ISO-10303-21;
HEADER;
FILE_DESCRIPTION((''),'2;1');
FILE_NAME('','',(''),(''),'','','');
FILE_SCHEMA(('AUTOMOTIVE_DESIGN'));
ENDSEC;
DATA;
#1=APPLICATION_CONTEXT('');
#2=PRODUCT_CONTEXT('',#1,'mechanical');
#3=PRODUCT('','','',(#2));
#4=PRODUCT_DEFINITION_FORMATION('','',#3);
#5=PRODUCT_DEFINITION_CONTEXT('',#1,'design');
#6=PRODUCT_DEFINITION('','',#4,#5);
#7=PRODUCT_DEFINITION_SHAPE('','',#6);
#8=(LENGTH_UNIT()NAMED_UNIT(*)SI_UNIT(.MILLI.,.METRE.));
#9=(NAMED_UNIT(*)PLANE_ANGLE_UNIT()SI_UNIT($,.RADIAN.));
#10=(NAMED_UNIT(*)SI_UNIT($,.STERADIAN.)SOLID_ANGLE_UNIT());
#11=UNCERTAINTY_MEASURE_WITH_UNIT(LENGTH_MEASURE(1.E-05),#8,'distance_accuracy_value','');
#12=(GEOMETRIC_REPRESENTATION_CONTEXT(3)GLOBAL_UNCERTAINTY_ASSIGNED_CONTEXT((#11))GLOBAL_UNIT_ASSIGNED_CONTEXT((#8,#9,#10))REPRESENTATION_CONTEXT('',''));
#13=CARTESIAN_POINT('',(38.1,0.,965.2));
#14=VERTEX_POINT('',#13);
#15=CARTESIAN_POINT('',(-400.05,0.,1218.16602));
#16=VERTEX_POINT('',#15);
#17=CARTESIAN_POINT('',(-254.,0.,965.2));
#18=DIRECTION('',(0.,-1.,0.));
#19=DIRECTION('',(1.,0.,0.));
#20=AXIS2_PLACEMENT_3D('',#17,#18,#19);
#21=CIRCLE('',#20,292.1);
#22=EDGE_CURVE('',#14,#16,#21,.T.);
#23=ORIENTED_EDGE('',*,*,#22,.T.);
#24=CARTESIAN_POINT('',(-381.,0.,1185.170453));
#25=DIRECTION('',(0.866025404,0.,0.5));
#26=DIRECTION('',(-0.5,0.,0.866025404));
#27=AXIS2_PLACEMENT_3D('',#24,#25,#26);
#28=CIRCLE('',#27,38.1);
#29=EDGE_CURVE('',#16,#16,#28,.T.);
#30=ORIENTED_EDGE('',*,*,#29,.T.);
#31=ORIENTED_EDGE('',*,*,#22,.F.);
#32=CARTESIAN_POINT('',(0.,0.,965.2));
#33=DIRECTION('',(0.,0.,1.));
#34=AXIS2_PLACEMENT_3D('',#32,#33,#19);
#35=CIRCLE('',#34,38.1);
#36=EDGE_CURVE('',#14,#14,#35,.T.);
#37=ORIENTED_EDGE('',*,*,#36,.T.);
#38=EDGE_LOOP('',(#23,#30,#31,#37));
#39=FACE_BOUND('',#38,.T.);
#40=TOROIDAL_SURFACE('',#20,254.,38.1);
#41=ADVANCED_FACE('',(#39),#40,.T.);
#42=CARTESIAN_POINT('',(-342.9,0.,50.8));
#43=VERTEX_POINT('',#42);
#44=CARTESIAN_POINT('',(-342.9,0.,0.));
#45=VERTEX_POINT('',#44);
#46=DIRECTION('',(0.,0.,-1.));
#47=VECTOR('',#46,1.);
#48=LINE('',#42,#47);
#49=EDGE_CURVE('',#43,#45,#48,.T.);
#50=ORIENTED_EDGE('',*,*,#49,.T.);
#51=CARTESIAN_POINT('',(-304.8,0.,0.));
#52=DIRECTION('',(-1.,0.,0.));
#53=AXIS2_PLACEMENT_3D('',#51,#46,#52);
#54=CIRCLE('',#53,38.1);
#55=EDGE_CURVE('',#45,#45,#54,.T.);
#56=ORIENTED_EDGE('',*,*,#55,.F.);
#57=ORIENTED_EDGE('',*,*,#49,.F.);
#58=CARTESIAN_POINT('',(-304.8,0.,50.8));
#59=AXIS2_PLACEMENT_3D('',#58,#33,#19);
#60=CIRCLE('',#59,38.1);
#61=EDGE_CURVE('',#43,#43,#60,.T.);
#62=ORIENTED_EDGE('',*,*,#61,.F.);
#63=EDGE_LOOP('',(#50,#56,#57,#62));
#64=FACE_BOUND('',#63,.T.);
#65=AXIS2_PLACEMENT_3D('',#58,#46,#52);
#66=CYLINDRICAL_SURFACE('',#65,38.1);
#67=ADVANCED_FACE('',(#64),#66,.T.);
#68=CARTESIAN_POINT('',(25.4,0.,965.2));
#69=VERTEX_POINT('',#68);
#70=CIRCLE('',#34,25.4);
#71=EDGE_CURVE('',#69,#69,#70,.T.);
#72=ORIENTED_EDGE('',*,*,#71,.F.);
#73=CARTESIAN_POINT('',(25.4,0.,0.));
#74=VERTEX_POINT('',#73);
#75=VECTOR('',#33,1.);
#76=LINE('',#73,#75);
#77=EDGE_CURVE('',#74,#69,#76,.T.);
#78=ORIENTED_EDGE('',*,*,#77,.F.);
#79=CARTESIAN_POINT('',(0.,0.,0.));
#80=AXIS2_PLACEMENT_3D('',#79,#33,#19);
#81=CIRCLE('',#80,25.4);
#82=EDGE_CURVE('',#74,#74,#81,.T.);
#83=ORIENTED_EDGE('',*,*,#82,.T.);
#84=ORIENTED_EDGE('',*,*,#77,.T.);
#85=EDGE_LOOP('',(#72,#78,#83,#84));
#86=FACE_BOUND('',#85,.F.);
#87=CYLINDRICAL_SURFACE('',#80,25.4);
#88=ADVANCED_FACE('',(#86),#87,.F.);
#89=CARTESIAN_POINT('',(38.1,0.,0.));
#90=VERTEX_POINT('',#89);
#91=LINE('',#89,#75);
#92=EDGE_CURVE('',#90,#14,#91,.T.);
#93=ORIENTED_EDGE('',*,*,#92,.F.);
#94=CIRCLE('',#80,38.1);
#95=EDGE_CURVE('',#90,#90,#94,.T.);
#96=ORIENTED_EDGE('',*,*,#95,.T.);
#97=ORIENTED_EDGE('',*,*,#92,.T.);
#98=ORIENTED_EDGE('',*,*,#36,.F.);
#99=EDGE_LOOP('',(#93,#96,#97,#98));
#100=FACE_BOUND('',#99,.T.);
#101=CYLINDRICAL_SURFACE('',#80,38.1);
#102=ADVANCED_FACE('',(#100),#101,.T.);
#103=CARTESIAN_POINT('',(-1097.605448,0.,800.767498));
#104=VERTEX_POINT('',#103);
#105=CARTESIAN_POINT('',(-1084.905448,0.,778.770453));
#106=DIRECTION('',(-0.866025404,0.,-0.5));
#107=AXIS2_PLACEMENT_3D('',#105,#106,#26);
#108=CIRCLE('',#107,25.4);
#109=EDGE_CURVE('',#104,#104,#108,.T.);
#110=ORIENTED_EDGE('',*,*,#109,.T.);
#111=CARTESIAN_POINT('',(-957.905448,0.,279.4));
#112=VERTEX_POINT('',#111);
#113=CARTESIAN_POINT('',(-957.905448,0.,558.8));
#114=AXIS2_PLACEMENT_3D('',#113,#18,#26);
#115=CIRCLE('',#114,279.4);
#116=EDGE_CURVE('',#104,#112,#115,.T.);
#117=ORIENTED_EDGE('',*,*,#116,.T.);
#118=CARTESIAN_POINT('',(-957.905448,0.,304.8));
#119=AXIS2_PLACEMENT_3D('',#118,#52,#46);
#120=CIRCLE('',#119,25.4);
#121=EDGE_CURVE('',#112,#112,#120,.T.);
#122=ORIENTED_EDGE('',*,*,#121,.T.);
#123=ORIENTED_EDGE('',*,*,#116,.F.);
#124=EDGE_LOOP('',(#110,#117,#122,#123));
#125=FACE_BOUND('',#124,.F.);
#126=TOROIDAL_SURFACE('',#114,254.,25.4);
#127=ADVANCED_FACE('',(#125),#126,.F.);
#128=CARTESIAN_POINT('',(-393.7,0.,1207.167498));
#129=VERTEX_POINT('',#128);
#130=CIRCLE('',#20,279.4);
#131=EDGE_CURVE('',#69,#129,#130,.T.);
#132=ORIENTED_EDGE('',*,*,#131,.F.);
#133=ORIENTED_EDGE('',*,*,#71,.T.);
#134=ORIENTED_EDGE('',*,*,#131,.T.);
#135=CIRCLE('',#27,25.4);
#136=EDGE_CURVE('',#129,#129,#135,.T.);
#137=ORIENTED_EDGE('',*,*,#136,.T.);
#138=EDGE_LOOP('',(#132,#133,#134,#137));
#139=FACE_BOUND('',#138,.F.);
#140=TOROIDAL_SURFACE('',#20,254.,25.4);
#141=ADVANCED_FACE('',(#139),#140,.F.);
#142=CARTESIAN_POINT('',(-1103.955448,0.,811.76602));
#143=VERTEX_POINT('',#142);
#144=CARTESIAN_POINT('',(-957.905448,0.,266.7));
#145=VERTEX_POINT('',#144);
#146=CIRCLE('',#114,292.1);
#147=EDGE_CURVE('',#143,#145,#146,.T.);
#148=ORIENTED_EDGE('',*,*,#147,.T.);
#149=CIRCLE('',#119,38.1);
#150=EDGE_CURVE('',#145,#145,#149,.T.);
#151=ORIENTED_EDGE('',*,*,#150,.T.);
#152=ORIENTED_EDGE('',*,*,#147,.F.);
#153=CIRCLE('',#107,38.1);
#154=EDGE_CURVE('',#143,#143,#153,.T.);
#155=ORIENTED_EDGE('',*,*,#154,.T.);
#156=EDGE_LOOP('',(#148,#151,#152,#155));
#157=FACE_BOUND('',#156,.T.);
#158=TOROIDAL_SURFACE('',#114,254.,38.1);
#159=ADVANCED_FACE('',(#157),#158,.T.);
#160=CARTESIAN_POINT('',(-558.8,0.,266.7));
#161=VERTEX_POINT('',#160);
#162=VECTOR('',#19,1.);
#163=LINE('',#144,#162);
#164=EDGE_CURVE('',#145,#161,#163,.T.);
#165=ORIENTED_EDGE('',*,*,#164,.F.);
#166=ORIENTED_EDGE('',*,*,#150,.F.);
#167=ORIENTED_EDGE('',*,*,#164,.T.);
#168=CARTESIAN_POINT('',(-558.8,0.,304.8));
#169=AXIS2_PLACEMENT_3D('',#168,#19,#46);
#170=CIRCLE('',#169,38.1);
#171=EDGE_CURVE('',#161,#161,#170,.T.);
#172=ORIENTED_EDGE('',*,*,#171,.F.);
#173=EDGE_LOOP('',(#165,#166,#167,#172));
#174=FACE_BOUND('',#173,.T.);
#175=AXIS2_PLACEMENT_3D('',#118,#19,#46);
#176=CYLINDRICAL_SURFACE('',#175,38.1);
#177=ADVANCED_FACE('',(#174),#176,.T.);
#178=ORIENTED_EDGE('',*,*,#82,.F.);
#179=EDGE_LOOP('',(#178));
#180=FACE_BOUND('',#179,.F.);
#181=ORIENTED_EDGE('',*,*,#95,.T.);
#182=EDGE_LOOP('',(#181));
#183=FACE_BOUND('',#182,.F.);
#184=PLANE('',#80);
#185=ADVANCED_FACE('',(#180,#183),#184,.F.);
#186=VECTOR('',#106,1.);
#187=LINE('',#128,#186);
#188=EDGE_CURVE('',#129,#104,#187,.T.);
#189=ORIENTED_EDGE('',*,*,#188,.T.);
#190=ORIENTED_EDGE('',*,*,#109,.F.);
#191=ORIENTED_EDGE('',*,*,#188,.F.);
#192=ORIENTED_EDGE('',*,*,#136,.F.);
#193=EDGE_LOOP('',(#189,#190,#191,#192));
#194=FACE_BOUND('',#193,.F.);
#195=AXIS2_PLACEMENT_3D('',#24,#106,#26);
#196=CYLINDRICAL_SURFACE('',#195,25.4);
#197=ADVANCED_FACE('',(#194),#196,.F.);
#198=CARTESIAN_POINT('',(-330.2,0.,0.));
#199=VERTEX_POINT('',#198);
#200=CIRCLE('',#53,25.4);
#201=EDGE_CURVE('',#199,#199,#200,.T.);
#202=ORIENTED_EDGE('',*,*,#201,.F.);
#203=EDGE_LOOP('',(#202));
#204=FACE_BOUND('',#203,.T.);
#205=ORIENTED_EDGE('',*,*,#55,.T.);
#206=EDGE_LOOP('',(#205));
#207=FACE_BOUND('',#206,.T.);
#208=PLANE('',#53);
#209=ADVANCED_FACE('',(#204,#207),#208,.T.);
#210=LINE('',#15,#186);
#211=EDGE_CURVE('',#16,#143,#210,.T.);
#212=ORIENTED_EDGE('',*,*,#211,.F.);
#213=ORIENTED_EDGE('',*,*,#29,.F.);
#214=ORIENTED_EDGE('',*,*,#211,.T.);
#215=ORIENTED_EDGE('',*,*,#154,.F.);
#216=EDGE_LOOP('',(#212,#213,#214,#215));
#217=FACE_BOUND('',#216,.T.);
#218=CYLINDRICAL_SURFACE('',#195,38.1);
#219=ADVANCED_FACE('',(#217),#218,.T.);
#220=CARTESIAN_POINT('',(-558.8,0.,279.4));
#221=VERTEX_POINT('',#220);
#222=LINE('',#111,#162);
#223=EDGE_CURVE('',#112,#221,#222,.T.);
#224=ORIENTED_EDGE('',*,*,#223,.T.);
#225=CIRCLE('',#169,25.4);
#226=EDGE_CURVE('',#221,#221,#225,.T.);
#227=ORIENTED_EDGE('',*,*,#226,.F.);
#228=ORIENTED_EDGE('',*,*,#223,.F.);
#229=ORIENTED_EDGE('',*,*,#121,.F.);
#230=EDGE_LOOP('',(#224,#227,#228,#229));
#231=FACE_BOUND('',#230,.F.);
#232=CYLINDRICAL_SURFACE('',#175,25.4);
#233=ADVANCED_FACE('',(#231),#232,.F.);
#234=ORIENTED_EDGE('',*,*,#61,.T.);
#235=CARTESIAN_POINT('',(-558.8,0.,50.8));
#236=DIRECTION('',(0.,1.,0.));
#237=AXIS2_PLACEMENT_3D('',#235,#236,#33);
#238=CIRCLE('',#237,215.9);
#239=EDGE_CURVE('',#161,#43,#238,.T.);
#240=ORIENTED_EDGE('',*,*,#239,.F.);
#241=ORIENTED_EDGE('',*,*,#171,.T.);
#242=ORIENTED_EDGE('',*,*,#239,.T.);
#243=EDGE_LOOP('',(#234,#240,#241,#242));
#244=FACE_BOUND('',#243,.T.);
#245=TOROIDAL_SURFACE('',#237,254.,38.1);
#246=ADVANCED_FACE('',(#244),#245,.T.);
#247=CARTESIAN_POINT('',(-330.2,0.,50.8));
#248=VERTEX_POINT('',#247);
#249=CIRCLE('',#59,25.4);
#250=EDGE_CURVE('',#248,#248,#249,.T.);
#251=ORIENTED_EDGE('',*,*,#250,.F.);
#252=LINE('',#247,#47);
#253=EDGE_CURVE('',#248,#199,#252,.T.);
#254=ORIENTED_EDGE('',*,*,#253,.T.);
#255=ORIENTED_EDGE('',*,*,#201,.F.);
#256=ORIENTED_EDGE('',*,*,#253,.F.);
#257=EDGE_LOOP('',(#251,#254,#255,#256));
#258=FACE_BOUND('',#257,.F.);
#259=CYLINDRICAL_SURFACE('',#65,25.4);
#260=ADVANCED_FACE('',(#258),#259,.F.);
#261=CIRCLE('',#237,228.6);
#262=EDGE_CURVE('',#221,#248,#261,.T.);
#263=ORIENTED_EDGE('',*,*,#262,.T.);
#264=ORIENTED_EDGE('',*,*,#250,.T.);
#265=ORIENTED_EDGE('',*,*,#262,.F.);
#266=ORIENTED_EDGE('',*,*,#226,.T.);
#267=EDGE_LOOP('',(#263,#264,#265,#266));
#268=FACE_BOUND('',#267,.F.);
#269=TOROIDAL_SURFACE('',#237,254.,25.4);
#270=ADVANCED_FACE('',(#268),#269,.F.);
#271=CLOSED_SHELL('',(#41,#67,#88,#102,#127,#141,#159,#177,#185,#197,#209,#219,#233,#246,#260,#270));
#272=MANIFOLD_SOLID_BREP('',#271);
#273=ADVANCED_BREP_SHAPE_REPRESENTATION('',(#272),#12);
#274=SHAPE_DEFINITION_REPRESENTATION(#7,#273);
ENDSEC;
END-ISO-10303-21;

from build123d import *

# Parameters (mm, degrees)
F2_R   = 38.1
F2_R_2 = 25.4


with BuildPart() as f3:
    # F3: sweep along a path in F0
    with BuildLine(Plane.XZ) as f3_path:
        Line((0, 0), (0, 965.2))
        ThreePointArc((0, 965.2), (-127, 1185.1704525612), (-381, 1185.1704525612))
        Line((-381, 1185.1704525612), (-1084.905448196, 778.7704525612))
        ThreePointArc((-1084.905448196, 778.7704525612), (-1203.2506080734, 493.059962544), (-957.905448196, 304.8))
        Line((-957.905448196, 304.8), (-558.8, 304.8))
        ThreePointArc((-558.8, 304.8), (-379.1948775786, 230.4051224214), (-304.8, 50.8))
        Line((-304.8, 50.8), (-304.8, 0))
    # F2 (on line) → F3 (sweep)
    with BuildSketch(Plane.XY):
        Circle(F2_R)
        Circle(F2_R_2, mode=Mode.SUBTRACT)
    sweep(path=f3_path.line)


solid = f3.part
